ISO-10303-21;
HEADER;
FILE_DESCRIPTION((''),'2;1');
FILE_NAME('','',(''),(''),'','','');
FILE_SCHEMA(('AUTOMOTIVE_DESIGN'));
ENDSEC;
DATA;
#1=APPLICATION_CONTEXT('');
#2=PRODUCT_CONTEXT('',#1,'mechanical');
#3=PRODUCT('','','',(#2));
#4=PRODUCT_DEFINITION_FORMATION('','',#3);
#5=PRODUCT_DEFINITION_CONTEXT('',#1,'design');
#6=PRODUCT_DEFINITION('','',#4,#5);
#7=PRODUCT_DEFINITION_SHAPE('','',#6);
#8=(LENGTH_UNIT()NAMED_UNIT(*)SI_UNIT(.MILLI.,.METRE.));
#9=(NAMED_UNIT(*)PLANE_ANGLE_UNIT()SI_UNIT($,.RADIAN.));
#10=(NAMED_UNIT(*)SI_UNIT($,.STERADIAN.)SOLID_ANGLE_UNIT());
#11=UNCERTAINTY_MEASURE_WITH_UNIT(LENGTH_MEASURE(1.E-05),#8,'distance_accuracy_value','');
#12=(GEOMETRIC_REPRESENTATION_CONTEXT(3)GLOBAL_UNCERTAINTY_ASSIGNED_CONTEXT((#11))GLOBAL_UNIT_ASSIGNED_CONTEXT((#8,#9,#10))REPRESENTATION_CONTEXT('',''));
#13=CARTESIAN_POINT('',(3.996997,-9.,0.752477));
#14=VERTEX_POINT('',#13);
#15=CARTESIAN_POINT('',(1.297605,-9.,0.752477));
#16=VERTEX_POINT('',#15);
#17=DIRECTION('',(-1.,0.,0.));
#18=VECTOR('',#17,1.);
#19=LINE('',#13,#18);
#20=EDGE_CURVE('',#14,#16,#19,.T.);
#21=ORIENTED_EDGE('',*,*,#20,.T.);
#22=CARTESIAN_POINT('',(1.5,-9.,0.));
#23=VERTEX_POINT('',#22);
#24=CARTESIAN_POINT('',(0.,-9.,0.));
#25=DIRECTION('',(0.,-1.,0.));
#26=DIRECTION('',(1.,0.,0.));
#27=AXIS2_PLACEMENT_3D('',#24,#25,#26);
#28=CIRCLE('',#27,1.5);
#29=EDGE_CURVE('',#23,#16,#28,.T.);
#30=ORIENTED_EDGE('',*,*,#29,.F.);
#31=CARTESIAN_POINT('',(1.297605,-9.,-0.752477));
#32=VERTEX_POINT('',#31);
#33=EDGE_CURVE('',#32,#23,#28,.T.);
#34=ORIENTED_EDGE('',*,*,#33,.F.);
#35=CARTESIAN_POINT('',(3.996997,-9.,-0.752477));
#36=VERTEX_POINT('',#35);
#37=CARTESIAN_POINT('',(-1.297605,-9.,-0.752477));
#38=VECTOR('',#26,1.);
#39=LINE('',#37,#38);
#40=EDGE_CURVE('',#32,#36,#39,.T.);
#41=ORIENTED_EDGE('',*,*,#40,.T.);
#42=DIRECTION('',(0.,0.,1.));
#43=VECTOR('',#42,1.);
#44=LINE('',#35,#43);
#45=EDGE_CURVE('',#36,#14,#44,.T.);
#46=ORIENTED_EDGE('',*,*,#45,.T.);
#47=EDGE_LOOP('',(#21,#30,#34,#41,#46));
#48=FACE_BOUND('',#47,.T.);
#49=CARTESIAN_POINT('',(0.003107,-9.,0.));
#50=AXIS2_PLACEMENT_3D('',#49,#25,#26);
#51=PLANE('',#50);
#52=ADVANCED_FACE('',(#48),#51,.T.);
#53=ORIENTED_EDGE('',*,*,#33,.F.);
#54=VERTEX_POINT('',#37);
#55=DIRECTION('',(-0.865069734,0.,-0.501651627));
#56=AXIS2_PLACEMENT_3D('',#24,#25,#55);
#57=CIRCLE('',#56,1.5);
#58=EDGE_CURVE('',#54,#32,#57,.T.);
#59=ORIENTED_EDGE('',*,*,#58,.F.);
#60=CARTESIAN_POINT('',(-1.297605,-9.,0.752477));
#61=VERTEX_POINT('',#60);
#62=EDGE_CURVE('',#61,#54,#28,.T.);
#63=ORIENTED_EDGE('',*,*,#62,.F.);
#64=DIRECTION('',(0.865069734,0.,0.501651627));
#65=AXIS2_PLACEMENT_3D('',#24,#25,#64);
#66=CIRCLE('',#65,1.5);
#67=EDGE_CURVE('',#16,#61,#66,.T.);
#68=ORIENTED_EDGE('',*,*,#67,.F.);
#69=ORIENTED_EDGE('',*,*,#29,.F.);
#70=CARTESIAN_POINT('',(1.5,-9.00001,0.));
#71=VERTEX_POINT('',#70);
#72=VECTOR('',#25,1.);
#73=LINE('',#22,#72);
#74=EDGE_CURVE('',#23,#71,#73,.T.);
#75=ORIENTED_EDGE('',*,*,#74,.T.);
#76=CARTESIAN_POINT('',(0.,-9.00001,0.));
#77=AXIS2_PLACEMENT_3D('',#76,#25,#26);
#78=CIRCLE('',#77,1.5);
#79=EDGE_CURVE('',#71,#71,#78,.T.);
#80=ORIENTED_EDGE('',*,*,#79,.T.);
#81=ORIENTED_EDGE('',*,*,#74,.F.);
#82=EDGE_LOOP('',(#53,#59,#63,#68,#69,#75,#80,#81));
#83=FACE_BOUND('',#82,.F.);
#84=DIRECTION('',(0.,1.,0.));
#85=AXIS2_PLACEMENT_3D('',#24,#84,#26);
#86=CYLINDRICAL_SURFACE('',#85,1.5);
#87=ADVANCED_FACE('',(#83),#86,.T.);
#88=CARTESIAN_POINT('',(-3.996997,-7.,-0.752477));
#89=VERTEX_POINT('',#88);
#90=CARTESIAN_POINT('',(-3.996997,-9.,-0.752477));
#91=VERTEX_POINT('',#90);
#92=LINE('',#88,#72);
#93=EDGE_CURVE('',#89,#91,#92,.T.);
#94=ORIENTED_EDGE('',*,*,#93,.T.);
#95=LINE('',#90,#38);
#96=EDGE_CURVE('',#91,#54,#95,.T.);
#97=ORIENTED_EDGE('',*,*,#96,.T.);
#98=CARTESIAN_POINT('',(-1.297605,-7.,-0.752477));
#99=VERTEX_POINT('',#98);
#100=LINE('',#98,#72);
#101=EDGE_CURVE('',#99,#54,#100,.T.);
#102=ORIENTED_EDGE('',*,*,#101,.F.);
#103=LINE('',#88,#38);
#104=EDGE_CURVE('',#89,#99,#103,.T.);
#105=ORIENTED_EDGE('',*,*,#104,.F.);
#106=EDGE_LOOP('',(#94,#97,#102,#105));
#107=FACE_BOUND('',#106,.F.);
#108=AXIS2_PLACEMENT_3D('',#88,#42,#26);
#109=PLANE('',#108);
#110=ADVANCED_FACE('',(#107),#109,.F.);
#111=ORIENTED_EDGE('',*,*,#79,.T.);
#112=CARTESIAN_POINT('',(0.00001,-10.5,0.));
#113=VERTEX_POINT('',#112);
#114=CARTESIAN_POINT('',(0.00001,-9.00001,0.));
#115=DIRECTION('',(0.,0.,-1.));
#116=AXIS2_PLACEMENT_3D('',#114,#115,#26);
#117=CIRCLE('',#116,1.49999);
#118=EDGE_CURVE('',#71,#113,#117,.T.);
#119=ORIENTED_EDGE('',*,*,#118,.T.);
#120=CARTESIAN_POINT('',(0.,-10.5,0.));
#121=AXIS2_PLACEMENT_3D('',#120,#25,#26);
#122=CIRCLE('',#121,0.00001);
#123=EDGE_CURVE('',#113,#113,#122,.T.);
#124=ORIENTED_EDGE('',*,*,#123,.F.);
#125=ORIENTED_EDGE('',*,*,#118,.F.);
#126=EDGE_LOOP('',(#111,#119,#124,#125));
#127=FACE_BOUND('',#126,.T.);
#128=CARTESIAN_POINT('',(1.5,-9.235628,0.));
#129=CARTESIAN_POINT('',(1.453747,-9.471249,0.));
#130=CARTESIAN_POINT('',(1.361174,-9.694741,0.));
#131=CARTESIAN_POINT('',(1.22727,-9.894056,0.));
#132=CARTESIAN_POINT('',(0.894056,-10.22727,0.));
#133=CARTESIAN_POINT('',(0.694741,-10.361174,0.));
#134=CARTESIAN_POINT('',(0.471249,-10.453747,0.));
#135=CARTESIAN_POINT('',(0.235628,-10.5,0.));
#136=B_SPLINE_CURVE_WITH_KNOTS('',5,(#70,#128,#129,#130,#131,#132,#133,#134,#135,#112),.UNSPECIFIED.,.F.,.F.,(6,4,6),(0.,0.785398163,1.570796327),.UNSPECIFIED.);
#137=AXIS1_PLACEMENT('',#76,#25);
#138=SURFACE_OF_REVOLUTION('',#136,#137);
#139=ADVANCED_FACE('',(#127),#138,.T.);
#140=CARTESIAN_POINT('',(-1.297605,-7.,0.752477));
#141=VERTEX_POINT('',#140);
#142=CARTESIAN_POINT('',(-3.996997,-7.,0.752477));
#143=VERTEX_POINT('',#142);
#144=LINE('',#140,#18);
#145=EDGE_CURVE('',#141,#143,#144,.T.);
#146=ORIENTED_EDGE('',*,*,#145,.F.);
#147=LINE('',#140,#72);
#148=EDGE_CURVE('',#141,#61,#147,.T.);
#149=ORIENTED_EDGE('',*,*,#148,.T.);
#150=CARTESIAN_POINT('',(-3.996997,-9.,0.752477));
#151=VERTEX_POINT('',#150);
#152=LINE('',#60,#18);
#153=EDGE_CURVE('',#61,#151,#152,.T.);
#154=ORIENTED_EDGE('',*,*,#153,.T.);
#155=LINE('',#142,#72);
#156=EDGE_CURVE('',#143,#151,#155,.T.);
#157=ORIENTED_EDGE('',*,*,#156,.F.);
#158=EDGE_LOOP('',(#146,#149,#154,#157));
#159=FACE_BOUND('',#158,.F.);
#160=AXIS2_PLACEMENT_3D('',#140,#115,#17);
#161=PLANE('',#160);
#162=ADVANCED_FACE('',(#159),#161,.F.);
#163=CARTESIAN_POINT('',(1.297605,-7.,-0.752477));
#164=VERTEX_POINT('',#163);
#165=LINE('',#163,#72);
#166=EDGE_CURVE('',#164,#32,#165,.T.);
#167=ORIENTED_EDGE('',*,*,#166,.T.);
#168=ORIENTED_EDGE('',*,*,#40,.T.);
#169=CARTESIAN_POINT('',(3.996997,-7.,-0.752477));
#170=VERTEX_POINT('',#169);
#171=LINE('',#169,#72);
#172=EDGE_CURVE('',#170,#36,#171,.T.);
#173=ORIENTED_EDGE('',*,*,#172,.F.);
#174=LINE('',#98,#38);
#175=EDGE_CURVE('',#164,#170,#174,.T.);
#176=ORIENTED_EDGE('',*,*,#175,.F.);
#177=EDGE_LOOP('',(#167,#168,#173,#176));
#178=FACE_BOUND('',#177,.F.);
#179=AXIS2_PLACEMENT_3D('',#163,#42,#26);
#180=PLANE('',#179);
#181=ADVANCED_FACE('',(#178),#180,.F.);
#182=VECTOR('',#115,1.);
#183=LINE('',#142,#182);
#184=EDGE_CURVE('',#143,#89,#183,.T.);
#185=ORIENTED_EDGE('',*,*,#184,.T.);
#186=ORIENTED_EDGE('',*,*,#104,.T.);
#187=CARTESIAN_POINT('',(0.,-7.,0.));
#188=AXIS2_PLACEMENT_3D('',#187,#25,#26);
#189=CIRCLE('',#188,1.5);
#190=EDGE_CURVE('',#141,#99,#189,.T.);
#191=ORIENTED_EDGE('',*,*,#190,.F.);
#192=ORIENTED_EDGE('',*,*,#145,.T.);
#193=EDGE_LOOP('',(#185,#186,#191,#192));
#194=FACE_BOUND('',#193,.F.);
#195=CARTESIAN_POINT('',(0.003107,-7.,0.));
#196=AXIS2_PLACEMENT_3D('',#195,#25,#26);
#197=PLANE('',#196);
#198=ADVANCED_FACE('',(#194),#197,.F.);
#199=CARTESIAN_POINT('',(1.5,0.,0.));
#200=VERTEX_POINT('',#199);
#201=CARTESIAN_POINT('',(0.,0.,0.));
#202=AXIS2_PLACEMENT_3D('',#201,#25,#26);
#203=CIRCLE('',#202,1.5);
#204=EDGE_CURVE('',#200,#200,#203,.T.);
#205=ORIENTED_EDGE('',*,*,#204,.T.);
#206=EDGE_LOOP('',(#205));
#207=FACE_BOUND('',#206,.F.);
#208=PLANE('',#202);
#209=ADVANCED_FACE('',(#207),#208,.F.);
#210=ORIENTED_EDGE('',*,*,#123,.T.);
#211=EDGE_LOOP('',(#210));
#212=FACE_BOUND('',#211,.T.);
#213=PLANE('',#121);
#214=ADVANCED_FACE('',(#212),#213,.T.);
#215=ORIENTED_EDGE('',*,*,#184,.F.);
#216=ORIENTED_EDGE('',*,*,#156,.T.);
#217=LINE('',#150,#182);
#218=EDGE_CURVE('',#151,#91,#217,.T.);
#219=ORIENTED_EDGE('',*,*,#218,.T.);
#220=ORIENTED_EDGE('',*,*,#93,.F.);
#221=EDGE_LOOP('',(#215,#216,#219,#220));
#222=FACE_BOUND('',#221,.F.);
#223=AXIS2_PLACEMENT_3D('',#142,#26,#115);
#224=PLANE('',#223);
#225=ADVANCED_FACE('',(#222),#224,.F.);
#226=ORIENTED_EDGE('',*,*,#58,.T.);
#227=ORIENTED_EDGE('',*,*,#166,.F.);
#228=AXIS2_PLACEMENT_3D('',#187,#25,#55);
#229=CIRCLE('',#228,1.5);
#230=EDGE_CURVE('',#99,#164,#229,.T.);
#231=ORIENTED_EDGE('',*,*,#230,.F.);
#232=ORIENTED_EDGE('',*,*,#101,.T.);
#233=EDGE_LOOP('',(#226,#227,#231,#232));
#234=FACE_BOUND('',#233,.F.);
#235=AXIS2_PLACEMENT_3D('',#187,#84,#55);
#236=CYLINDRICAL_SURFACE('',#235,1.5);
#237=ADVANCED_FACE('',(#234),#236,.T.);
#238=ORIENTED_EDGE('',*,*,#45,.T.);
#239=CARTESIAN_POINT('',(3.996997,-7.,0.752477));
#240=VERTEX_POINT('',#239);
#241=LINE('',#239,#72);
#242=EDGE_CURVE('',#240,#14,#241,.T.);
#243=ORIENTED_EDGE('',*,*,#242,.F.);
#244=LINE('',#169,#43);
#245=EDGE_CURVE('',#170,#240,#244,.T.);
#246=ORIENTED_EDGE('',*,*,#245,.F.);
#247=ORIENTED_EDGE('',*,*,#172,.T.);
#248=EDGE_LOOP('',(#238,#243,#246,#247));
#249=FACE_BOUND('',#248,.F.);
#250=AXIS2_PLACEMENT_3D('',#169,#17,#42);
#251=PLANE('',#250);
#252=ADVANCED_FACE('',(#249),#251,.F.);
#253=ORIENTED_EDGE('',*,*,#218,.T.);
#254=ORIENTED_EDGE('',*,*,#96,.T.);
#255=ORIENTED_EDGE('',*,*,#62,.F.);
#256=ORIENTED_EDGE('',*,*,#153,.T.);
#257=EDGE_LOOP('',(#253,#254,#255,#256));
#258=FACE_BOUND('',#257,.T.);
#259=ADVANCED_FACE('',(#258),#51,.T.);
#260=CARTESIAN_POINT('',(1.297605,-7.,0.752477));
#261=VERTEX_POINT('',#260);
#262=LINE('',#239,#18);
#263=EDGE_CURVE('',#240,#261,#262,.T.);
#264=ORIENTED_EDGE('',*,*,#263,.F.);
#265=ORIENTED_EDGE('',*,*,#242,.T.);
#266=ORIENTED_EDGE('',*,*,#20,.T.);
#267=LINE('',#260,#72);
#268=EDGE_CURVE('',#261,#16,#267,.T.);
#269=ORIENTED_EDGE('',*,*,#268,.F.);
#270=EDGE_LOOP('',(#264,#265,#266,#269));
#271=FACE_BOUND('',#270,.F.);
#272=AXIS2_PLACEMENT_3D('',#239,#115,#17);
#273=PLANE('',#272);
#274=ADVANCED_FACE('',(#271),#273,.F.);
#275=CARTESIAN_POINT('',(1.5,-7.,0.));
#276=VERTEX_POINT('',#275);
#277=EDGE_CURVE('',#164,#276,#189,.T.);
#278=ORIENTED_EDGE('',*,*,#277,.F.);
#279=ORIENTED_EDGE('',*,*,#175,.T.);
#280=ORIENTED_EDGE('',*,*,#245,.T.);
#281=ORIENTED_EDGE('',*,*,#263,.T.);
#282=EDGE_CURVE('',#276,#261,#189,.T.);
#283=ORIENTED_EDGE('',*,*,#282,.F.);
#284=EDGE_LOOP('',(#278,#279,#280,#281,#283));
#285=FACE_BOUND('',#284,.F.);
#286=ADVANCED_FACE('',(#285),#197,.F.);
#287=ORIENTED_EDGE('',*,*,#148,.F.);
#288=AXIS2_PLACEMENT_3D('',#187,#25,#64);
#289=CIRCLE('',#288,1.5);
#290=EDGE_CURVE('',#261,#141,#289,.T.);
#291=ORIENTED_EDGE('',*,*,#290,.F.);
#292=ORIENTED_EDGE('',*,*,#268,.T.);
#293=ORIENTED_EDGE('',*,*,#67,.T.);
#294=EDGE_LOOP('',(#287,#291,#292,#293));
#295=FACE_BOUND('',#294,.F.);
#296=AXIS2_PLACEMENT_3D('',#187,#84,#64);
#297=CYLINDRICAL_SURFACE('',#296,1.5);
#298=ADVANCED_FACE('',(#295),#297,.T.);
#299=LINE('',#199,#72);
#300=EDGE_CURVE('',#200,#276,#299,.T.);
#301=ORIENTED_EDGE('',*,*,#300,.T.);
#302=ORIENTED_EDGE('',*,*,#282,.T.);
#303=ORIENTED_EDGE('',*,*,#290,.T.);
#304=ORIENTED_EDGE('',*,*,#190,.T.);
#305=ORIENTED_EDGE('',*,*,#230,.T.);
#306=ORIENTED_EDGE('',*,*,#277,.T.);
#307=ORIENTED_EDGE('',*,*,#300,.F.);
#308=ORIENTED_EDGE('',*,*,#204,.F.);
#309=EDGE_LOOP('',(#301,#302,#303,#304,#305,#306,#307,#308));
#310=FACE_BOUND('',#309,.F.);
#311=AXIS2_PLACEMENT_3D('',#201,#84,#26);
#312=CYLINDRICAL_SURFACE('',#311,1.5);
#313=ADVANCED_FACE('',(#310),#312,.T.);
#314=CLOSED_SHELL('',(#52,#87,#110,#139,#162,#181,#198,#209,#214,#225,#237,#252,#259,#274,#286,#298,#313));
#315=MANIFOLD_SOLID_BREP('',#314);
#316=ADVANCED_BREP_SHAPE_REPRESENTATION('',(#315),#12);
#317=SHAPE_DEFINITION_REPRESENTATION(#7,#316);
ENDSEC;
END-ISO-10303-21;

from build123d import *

# Parameters (mm, degrees)
F0_R     = 1.5
F1_DEPTH = 7
F3_DEPTH = 2
F4_R     = 1.5
F5_DEPTH = 1.5
F6_R     = 1.49999


# Not quite as in the source:
# - a fillet or chamfer is up to 0.001 mm smaller than in the source, because OpenCascade refuses the exact size


with BuildPart() as f1:
    # F0 (on Front) → F1 (new body)
    with BuildSketch(Plane.XZ):
        Circle(F0_R)
    extrude(amount=F1_DEPTH)

    # F2 (on face) → F3 (join)
    with BuildSketch(Plane.XZ.offset(7)):
        with BuildLine():
            ThreePointArc((1.2976046011, -0.752477441), (1.4485176736, -0.3896107662), (1.5, 0))
            ThreePointArc((1.5, 0), (1.4485176736, 0.3896107662), (1.2976046011, 0.752477441))
            Line((1.2976046011, 0.752477441), (-1.2976046011, 0.752477441))
            ThreePointArc((-1.2976046011, 0.752477441), (-1.5, 0), (-1.2976046011, -0.752477441))
            Line((-1.2976046011, -0.752477441), (1.2976046011, -0.752477441))
        make_face()
        with BuildLine():
            ThreePointArc((1.2976046011, 0.752477441), (1.4485176736, 0.3896107662), (1.5, 0))
            ThreePointArc((1.5, 0), (1.4485176736, -0.3896107662), (1.2976046011, -0.752477441))
            Line((1.2976046011, -0.752477441), (3.9969966747, -0.752477441))
            Line((3.9969966747, -0.752477441), (3.9969966747, 0.752477441))
            Line((3.9969966747, 0.752477441), (1.2976046011, 0.752477441))
        make_face()
        with BuildLine():
            Line((-1.2976046011, 0.752477441), (1.2976046011, 0.752477441))
            ThreePointArc((1.2976046011, 0.752477441), (0, 1.5), (-1.2976046011, 0.752477441))
        make_face()
        with BuildLine():
            ThreePointArc((-1.2976046011, -0.752477441), (0, -1.5), (1.2976046011, -0.752477441))
            Line((1.2976046011, -0.752477441), (-1.2976046011, -0.752477441))
        make_face()
        with BuildLine():
            ThreePointArc((-1.2976046011, -0.752477441), (-1.5, 0), (-1.2976046011, 0.752477441))
            Line((-1.2976046011, 0.752477441), (-3.9969966747, 0.752477441))
            Line((-3.9969966747, 0.752477441), (-3.9969966747, -0.752477441))
            Line((-3.9969966747, -0.752477441), (-1.2976046011, -0.752477441))
        make_face()
    extrude(amount=F3_DEPTH)

    # F4 (on face) → F5 (join)
    with BuildSketch(Plane.XZ.offset(9)):
        Circle(F4_R)
    extrude(amount=F5_DEPTH)

    # F6 (radius 1.5 in the source; OpenCascade refuses exactly that, so slightly less here)
    f6_edges = [f1.edges().sort_by_distance(p)[0] for p in [
        (-1.5, -10.5, 0),
    ]]
    fillet(f6_edges, radius=F6_R)


solid = f1.part
